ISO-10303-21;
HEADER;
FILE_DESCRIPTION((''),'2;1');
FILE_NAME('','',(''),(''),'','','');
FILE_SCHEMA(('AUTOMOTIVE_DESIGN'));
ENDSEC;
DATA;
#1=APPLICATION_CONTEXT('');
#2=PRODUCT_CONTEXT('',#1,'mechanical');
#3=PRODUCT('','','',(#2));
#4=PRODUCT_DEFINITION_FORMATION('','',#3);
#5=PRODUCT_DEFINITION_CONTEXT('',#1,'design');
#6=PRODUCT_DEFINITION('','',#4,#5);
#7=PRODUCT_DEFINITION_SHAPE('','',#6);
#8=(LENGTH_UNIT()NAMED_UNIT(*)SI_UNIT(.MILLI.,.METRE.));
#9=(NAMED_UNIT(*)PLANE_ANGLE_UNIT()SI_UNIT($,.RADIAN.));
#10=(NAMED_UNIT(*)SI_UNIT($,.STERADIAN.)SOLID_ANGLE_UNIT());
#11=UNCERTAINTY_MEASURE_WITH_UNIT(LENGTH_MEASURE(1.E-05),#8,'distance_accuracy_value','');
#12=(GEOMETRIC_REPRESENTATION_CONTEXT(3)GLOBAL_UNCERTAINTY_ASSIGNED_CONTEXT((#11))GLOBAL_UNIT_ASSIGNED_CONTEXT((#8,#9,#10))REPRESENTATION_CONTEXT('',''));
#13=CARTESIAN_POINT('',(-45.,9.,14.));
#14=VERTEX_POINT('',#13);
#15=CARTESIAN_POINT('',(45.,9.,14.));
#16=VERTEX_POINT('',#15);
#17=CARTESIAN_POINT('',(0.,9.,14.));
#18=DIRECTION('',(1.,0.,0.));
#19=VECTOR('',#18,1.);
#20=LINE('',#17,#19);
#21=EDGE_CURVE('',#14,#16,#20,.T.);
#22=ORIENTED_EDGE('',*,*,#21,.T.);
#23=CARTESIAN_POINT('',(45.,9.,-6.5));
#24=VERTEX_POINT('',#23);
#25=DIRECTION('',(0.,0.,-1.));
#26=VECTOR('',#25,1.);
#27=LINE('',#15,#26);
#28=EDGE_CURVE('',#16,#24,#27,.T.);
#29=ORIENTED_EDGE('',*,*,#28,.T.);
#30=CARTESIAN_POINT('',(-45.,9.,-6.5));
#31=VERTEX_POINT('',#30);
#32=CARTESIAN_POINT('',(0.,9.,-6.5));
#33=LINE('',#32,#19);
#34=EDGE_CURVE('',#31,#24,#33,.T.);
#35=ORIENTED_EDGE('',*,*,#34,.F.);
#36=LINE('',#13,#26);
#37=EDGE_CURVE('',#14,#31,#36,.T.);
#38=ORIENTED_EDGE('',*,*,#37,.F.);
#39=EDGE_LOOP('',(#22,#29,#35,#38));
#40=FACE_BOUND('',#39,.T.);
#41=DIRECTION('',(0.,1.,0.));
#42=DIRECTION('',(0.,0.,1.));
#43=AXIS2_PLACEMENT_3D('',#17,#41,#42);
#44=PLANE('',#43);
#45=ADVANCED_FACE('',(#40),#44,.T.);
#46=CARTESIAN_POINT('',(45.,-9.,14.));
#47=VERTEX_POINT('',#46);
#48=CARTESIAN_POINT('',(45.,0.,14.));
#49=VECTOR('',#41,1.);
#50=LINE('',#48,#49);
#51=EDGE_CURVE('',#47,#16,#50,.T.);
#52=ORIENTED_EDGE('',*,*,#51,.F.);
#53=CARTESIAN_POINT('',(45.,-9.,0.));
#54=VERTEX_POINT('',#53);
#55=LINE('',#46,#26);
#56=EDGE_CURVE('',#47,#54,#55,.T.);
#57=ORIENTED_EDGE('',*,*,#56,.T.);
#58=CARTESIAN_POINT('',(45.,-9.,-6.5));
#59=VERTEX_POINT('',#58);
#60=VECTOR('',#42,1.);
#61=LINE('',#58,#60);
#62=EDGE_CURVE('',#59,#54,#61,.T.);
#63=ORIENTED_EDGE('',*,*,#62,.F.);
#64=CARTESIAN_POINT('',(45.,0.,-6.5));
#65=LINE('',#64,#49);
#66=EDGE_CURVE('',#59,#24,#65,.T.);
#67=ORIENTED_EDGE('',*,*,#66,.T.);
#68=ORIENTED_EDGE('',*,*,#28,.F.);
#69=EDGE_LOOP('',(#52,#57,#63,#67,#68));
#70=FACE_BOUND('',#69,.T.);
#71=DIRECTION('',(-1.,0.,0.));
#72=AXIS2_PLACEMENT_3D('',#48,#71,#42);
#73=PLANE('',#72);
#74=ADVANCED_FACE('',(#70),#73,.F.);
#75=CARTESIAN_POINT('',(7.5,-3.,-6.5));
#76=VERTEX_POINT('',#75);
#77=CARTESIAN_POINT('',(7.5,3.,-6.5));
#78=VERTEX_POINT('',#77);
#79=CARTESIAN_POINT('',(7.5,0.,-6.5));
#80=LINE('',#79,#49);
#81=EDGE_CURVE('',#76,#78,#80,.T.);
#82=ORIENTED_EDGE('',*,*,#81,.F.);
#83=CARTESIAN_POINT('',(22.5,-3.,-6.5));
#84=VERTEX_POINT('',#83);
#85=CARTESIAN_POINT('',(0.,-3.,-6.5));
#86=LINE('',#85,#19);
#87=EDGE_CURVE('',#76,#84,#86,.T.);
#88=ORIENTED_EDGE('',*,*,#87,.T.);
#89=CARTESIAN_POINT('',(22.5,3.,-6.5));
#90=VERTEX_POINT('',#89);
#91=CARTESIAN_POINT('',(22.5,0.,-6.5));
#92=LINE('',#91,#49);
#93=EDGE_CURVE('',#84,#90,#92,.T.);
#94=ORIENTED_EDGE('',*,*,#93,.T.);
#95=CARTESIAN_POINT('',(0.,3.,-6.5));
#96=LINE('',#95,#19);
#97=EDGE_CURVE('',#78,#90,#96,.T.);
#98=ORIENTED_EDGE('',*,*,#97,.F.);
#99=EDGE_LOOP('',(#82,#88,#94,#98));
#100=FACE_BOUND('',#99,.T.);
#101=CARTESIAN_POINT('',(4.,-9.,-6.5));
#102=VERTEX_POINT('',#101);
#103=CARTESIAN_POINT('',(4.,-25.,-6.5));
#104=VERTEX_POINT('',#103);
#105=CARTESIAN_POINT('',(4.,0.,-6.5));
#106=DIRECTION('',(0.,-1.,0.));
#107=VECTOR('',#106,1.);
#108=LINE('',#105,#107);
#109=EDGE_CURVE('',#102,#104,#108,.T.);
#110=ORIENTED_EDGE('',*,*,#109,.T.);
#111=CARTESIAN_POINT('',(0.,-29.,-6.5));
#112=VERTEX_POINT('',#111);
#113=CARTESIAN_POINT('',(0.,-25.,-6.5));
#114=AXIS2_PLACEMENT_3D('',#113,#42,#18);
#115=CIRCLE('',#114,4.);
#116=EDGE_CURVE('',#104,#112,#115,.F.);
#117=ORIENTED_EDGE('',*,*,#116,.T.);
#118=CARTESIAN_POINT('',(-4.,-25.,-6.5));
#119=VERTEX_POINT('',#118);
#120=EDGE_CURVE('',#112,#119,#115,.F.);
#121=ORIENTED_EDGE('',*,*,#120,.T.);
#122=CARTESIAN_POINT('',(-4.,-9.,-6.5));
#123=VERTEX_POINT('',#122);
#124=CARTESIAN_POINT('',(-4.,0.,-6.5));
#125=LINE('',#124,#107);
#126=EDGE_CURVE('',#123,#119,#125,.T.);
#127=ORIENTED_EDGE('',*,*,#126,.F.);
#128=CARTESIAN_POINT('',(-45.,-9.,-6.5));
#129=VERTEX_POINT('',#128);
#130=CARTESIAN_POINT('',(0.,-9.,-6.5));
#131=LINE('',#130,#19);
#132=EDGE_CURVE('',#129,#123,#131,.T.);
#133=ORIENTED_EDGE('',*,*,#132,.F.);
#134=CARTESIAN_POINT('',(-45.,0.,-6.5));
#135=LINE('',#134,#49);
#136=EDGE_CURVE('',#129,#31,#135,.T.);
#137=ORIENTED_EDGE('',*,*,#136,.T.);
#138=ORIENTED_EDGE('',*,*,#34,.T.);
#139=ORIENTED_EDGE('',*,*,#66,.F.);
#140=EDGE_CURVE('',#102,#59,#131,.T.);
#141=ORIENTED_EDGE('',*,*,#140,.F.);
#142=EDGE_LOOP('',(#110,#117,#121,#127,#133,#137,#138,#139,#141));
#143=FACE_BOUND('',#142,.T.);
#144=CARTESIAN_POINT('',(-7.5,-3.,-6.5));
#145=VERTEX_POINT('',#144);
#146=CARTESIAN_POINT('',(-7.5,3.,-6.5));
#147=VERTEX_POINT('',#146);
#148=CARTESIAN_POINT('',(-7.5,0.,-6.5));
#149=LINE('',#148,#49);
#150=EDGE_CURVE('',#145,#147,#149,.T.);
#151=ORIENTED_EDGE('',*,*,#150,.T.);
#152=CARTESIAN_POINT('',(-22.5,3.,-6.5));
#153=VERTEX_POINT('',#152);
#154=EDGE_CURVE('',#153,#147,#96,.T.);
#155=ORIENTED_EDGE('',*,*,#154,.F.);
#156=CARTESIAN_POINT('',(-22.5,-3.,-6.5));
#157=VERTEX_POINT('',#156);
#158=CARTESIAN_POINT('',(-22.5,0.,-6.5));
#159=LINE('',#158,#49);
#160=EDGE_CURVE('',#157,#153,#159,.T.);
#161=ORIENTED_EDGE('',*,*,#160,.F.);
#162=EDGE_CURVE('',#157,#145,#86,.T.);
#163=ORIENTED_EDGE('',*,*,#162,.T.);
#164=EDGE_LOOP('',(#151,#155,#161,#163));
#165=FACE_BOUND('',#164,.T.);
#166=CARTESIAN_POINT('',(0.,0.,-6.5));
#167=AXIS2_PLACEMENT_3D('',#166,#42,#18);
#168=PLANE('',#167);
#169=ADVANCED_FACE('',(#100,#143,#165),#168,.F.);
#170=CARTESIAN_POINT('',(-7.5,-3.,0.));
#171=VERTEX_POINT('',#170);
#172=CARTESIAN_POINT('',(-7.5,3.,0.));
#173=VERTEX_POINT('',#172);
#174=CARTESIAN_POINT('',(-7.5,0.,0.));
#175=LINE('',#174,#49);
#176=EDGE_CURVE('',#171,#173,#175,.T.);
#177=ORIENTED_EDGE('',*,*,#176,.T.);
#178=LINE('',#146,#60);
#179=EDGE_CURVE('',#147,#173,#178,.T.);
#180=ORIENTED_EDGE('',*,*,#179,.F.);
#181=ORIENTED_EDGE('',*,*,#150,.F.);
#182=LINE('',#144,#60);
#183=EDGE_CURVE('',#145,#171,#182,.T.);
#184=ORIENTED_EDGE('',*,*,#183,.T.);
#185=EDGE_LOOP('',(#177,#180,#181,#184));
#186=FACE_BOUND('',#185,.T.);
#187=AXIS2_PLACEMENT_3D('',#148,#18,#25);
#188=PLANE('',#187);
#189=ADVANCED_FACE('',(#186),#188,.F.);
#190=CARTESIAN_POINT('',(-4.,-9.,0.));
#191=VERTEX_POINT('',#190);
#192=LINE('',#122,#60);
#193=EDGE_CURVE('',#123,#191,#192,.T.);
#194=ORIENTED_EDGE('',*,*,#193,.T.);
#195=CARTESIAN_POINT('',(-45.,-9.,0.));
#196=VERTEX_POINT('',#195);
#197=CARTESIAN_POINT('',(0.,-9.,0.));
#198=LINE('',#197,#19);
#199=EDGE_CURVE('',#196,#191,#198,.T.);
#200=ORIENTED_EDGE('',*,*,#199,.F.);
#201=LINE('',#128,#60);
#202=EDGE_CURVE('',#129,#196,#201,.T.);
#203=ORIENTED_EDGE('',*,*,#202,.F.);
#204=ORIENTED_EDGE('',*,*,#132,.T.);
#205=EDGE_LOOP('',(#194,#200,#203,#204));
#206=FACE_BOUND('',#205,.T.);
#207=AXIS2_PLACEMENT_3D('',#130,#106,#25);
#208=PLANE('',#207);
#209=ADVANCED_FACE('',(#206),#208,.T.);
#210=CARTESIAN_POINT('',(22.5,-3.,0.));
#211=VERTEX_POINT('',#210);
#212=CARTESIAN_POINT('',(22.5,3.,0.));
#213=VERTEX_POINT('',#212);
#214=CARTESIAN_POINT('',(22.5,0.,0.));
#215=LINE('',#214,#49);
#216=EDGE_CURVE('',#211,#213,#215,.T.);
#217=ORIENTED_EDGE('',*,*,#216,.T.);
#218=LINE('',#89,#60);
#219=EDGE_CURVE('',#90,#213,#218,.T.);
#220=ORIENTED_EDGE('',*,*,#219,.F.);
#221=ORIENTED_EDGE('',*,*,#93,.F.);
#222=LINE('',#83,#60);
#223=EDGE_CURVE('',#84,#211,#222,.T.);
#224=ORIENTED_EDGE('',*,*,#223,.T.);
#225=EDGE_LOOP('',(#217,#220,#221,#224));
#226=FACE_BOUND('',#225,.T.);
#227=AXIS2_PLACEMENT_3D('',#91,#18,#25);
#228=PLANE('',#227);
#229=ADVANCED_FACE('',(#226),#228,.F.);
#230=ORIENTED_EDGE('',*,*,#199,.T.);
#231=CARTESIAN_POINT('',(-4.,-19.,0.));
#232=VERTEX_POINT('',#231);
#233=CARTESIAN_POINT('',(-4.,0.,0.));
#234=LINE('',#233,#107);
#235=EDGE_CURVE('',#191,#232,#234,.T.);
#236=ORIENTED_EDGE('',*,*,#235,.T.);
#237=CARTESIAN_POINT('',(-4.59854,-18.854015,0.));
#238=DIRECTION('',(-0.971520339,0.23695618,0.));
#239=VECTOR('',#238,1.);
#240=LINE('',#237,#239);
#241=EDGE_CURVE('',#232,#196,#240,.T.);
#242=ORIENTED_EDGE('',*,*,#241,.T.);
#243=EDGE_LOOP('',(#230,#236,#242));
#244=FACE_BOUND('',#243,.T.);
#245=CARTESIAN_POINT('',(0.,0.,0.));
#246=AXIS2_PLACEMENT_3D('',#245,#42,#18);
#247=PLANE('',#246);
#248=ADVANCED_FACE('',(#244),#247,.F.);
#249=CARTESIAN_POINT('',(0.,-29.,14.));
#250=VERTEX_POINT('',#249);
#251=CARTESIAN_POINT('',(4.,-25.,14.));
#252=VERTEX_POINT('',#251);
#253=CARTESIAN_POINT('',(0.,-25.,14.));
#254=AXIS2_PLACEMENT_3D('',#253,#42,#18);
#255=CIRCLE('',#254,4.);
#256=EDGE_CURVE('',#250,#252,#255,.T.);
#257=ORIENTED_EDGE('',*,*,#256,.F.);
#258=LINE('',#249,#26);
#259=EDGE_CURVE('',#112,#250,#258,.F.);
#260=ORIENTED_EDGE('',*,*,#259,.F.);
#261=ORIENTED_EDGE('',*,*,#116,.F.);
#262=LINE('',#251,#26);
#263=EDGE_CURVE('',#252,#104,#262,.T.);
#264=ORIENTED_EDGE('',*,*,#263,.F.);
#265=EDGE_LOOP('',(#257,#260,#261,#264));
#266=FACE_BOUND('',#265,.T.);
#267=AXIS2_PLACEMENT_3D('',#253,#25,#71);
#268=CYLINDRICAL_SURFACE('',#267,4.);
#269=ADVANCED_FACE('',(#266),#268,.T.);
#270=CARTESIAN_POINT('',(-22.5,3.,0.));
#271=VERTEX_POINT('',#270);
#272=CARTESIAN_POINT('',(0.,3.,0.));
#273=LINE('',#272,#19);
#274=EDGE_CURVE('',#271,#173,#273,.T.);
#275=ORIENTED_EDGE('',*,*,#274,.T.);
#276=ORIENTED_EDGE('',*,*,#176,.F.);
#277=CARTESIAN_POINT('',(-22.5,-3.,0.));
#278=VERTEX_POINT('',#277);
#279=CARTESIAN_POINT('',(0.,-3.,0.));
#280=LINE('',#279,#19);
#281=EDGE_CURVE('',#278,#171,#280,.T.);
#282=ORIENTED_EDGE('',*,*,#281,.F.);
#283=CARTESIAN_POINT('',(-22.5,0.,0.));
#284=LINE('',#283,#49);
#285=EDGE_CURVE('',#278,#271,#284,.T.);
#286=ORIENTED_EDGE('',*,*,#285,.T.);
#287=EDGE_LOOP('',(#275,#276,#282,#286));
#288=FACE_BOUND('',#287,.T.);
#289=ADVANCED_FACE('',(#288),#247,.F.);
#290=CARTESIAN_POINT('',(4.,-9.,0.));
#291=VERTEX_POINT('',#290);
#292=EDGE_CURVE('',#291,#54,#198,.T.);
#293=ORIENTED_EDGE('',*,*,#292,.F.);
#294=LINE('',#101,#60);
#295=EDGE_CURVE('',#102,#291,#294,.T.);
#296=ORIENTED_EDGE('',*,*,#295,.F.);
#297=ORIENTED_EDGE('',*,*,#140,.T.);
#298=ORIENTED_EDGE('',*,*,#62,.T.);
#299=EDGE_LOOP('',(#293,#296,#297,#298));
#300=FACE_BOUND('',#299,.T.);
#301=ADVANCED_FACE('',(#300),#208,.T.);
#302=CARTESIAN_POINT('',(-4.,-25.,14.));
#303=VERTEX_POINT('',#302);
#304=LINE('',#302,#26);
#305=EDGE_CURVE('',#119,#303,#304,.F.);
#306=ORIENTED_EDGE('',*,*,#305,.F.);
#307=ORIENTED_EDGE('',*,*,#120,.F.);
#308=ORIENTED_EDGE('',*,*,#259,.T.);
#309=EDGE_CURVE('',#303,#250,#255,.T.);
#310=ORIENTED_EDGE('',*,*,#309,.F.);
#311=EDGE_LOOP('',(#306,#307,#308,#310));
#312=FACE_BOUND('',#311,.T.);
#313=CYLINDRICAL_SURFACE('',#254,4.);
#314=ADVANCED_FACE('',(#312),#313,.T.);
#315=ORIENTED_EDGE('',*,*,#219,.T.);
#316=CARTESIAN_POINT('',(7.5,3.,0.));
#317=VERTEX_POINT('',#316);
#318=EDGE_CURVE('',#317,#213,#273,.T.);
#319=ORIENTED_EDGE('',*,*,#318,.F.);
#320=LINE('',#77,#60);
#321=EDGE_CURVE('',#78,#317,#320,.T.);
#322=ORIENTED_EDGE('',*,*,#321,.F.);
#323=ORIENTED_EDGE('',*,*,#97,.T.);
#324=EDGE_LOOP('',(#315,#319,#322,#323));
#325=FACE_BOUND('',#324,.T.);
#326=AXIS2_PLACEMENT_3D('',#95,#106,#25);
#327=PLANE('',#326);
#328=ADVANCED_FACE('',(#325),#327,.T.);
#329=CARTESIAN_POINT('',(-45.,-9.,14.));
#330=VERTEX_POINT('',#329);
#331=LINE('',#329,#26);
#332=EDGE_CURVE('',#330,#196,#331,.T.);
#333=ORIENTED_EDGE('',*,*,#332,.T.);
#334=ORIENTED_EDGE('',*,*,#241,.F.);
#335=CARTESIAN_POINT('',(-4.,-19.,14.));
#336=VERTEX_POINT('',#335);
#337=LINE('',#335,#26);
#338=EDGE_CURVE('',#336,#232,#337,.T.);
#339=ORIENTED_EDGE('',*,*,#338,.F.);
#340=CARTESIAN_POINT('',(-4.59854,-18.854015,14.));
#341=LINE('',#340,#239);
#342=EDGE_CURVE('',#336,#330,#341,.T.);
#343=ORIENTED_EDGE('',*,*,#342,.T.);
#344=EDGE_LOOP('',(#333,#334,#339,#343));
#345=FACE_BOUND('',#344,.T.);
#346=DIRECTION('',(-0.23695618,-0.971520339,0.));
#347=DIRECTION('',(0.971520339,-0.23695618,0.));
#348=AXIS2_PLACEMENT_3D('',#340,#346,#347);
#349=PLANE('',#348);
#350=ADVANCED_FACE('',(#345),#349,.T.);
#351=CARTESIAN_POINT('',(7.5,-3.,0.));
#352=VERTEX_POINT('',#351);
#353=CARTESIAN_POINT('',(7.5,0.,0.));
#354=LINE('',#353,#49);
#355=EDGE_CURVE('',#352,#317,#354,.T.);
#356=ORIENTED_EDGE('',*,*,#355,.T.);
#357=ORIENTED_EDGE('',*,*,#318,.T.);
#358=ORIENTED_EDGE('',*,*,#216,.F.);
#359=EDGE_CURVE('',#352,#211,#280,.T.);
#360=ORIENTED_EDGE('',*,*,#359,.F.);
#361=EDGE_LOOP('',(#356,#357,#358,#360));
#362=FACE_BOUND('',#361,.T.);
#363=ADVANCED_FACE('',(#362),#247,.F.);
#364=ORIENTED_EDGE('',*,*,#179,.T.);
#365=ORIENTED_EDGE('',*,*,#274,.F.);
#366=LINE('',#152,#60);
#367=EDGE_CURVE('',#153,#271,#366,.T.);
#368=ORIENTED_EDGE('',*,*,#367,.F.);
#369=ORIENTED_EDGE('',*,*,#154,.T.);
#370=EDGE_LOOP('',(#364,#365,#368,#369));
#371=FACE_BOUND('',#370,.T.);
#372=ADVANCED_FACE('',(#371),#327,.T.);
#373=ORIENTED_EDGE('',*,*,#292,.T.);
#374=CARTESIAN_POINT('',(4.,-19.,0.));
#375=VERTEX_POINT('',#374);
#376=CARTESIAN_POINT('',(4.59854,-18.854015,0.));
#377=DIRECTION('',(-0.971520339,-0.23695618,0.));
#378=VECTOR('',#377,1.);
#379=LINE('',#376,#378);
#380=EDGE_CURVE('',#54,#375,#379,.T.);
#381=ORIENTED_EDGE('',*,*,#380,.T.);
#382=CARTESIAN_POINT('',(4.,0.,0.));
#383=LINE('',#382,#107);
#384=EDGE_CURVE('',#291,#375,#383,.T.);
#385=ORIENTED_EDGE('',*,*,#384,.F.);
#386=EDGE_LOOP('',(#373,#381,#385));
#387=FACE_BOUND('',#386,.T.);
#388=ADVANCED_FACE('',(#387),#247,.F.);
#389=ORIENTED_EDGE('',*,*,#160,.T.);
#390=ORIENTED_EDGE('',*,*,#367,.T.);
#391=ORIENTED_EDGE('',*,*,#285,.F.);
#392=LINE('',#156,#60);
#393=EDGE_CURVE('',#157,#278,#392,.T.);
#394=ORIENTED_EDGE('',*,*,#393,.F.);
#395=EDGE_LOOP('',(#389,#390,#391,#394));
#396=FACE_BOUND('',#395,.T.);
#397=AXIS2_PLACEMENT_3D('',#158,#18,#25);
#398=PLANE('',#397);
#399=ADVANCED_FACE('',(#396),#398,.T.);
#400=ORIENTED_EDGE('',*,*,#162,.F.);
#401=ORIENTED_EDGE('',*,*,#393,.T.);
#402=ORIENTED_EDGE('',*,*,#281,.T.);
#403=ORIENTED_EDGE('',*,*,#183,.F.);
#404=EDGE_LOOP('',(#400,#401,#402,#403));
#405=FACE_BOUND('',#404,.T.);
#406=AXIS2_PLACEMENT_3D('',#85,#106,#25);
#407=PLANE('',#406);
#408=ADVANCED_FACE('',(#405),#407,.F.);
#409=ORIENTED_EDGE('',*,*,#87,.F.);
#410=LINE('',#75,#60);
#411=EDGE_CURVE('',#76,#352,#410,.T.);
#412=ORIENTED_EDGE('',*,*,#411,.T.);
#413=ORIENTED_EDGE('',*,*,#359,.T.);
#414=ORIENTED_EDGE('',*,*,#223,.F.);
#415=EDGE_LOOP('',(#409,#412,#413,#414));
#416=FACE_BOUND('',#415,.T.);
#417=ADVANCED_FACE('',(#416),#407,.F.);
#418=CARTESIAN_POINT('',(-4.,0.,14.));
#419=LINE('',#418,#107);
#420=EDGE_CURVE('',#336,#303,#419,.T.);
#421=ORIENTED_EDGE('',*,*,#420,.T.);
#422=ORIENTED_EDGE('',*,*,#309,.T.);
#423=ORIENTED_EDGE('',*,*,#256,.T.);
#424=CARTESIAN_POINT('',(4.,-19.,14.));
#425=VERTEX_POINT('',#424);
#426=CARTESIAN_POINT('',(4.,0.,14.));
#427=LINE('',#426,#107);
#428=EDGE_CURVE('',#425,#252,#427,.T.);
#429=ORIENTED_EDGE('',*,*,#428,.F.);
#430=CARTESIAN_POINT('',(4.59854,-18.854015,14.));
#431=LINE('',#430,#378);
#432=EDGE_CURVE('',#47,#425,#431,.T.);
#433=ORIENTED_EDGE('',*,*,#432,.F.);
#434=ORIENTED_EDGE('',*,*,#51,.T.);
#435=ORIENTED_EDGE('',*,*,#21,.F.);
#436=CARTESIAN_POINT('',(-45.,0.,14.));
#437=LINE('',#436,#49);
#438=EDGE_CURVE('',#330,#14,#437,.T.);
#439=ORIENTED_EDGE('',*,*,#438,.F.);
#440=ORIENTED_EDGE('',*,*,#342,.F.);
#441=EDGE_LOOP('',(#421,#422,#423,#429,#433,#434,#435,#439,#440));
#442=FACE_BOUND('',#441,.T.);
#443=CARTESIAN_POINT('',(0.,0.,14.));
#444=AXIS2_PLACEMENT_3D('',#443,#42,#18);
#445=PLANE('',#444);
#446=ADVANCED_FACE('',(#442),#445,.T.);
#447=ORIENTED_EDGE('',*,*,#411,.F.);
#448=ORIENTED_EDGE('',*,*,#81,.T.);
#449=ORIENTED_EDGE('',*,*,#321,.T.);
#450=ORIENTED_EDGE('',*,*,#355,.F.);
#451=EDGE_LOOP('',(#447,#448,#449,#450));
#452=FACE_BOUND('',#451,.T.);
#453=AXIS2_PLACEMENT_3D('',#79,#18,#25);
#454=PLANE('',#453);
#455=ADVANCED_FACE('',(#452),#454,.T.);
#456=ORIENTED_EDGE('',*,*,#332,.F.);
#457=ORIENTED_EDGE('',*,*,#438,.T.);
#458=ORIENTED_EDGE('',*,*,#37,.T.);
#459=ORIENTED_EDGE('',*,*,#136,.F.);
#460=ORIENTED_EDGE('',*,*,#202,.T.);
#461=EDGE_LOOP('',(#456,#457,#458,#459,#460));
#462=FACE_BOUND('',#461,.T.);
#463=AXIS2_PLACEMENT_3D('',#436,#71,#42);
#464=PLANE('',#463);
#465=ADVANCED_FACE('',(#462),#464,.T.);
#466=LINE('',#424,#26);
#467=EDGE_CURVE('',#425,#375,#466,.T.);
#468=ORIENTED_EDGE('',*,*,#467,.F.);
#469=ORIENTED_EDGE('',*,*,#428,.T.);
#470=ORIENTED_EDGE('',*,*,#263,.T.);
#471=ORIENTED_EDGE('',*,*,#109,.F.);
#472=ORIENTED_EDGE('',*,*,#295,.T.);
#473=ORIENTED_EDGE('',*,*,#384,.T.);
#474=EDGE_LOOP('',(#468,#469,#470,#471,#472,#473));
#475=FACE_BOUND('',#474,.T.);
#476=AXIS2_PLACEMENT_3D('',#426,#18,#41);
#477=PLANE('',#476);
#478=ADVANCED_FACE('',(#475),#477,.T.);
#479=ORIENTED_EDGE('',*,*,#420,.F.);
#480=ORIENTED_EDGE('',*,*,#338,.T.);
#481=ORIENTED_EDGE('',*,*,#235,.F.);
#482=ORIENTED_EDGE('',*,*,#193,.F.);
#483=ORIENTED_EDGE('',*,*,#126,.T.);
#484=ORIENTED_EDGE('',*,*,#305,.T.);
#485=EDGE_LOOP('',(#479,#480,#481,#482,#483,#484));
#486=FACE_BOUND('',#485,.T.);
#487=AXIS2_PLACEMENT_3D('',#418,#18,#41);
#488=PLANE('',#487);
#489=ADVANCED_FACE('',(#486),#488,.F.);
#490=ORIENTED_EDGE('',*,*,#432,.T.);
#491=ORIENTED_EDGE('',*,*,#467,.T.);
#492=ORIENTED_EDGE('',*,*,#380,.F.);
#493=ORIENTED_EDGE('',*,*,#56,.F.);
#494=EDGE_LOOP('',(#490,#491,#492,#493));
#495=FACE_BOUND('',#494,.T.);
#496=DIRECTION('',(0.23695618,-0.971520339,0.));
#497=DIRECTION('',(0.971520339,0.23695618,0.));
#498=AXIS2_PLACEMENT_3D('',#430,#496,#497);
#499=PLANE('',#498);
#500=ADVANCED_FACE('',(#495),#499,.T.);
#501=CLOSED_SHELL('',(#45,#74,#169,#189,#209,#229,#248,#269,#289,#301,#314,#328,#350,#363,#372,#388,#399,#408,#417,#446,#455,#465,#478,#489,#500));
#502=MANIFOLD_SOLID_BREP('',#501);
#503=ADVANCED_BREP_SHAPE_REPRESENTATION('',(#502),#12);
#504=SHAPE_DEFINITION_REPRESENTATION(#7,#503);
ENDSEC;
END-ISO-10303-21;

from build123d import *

# Parameters (mm, degrees)
SKETCH1_W           = 15
SKETCH1_H           = 6
SKETCH1_W_2         = 8
SKETCH1_H_2         = 20
BOSS_EXTRUDE1_DEPTH = 14
SKETCH3_W           = 15
SKETCH3_H           = 6
SKETCH3_W_2         = 8
SKETCH3_H_2         = 20
BOSS_EXTRUDE2_DEPTH = 6.5
FILLET1_R           = 4


with BuildPart() as part:
    # Sketch1 → Boss-Extrude1 (new body)
    # profile 1 of 6: a face of its own
    with BuildSketch(Plane.XY):
        Polygon((-4, -9), (4, -9), (45, -9), (45, 9), (-45, 9), (-45, -9), align=None)
        with Locations((-15, 0)):
            Rectangle(SKETCH1_W, SKETCH1_H, mode=Mode.SUBTRACT)
        with Locations((15, 0)):
            Rectangle(SKETCH1_W, SKETCH1_H, mode=Mode.SUBTRACT)
    # profile 2 of 6: a face of its own
    with BuildSketch(Plane.XY):
        with Locations((0, -19)):
            Rectangle(SKETCH1_W_2, SKETCH1_H_2)
    # profile 3 of 6: a face of its own
    with BuildSketch(Plane.XY):
        with Locations((-15, 0)):
            Rectangle(SKETCH1_W, SKETCH1_H)
    # profile 4 of 6: a face of its own
    with BuildSketch(Plane.XY):
        with Locations((15, 0)):
            Rectangle(SKETCH1_W, SKETCH1_H)
    # profile 5 of 6: a face of its own
    with BuildSketch(Plane.XY):
        Polygon((45, -9), (4, -9), (4, -19), align=None)
    # profile 6 of 6: a face of its own
    with BuildSketch(Plane.XY):
        Polygon((-4, -19), (-4, -9), (-45, -9), align=None)
    extrude(amount=BOSS_EXTRUDE1_DEPTH)

    # Sketch3 → Boss-Extrude2 (add)
    # profile 1 of 2: a face of its own
    with BuildSketch(Plane.XY):
        Polygon((-4, -9), (4, -9), (45, -9), (45, 9), (-45, 9), (-45, -9), align=None)
        with Locations((-15, 0)):
            Rectangle(SKETCH3_W, SKETCH3_H, mode=Mode.SUBTRACT)
        with Locations((15, 0)):
            Rectangle(SKETCH3_W, SKETCH3_H, mode=Mode.SUBTRACT)
    # profile 2 of 2: a face of its own
    with BuildSketch(Plane.XY):
        with Locations((0, -19)):
            Rectangle(SKETCH3_W_2, SKETCH3_H_2)
    extrude(amount=-BOSS_EXTRUDE2_DEPTH)

    # Fillet1
    fillet1_edges = [part.edges().sort_by_distance(p)[0] for p in [
        (-4, -29, 3.75),
        (4, -29, 3.75),
    ]]
    fillet(fillet1_edges, radius=FILLET1_R - 0.0001)  # a hair under: the kernel refuses the full size


solid = part.part
